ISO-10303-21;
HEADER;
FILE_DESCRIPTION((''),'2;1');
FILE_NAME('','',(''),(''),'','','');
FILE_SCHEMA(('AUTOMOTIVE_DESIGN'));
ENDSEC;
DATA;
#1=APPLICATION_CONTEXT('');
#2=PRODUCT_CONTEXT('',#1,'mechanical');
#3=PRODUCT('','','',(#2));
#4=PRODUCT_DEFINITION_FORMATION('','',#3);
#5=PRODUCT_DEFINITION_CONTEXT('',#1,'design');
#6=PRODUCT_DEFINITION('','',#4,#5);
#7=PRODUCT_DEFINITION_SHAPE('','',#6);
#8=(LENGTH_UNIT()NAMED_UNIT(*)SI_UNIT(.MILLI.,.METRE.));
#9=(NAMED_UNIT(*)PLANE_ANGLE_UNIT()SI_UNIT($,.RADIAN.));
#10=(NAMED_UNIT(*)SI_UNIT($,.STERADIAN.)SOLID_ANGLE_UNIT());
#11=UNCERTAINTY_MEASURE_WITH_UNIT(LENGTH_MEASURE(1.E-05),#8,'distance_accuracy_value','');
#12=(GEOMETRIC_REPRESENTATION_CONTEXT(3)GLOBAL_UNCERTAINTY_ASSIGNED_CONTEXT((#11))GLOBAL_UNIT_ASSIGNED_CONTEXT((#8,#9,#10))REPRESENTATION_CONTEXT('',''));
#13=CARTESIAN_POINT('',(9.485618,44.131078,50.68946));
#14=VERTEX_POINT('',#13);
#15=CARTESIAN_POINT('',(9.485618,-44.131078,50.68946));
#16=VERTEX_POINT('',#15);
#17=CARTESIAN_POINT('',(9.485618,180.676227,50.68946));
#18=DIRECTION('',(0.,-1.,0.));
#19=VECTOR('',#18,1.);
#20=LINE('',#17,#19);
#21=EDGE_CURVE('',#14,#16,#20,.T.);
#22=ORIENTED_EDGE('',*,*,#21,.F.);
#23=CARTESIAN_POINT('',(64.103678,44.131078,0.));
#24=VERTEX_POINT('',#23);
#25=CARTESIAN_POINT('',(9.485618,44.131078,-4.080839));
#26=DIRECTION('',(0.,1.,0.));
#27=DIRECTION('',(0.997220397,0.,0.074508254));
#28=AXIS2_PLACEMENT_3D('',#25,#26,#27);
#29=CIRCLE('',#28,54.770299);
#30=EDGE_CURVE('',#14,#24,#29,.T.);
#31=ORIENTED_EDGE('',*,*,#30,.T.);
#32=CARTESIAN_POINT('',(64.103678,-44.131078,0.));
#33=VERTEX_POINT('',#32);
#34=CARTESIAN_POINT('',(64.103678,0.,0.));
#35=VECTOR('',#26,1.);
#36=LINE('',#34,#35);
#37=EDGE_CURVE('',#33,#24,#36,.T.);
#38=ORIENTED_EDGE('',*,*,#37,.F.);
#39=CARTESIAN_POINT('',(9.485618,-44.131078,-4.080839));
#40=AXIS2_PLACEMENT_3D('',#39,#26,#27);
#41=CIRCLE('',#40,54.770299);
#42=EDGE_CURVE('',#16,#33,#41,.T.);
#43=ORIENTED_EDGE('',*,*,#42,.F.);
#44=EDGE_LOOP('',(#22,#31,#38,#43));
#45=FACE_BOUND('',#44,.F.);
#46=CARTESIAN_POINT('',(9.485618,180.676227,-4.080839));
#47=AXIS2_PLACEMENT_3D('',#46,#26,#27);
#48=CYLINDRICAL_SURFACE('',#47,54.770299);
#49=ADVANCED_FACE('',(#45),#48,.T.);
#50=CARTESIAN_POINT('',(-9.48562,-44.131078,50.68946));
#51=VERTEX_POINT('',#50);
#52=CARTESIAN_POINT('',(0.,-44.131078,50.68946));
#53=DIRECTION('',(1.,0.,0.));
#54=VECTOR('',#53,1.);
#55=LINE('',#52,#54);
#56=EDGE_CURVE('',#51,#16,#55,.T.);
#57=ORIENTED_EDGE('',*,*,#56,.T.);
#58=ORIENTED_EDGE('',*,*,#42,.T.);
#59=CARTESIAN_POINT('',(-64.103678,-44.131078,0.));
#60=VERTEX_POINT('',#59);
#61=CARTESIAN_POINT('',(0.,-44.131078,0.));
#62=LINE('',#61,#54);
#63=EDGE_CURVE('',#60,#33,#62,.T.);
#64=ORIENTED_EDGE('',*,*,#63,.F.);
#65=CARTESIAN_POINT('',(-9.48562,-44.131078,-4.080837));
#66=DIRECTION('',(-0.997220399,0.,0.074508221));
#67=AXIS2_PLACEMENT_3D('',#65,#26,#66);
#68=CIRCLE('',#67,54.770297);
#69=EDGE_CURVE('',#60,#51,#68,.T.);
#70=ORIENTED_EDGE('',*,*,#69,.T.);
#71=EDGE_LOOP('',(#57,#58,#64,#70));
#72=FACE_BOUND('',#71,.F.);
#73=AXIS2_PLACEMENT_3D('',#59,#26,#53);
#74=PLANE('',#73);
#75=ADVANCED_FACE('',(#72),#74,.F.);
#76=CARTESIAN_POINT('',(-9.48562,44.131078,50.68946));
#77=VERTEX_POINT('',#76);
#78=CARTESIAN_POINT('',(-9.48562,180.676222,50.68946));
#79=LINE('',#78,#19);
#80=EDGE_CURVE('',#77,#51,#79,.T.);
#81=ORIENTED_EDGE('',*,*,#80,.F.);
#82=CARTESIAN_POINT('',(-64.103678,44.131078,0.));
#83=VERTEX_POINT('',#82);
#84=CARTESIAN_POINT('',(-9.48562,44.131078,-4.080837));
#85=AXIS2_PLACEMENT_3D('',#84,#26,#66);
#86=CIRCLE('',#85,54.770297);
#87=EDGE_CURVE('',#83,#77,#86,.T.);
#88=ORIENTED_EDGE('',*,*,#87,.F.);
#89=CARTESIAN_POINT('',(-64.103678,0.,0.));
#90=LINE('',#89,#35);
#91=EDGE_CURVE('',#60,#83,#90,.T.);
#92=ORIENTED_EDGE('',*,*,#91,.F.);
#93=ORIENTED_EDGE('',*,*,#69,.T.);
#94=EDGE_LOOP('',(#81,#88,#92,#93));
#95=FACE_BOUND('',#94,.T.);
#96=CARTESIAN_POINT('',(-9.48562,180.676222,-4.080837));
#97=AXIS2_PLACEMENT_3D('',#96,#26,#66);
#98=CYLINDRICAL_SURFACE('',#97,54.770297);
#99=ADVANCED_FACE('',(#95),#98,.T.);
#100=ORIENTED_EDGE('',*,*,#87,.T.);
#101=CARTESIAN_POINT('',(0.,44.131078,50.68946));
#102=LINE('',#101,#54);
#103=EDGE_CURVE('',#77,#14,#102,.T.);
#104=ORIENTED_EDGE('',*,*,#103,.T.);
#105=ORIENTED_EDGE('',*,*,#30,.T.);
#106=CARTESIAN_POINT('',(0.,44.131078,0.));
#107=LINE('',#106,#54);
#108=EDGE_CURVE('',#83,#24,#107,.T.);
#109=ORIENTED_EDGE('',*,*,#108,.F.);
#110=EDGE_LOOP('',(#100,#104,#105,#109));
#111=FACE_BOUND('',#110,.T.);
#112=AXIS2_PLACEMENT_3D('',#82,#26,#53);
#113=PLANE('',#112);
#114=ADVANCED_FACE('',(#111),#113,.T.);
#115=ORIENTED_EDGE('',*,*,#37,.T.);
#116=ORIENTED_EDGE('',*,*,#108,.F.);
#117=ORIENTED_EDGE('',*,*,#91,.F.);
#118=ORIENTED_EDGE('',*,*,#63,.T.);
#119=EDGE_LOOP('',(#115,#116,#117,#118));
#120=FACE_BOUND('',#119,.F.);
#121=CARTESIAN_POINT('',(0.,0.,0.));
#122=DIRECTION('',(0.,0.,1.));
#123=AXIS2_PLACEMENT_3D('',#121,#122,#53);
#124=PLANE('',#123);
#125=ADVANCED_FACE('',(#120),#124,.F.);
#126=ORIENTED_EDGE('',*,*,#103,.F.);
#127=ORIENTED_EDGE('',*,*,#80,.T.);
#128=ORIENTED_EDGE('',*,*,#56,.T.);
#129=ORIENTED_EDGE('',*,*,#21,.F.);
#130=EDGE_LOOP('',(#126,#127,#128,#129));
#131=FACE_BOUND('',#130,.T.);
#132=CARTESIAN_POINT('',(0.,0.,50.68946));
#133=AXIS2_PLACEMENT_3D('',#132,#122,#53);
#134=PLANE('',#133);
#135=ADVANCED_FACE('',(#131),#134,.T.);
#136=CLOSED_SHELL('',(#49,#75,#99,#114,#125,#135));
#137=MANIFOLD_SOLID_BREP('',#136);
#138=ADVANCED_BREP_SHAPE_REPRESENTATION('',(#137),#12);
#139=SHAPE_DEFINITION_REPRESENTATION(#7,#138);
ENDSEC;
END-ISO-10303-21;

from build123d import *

# Parameters (mm, degrees)
F0_W        = 128.2073557377
F0_H        = 88.262155652
F1_DEPTH    = 50.68946
F2_T1_DEPTH = 361.3524449255
F3_T1_DEPTH = 361.352454187


# Not quite as in the source:
# - a fillet or chamfer that OpenCascade refuses, or shapes differently, is made with other operations: its cross-section is extruded or revolved along the edge and cut away or added


with BuildPart() as f1:
    # F0 (on Top) → F1 (new body)
    with BuildSketch(Plane.XY):
        Rectangle(F0_W, F0_H)
    extrude(amount=F1_DEPTH)

    # F2: fillet of radius 54.7702974041 on 1 edges, made by hand

    # F2_s2 → F2_t1 (cut)
    with BuildSketch(Plane.XZ.offset(-180.6762224627)):
        with BuildLine():
            ThreePointArc((-64.1036778688, 0), (-46.7433494099, 36.0644870809), (-9.4856200142, 50.68946))
            Line((-9.4856200142, 50.68946), (-64.1036778688, 50.68946))
            Line((-64.1036778688, 50.68946), (-64.1036778688, 0))
        make_face()
    extrude(amount=F2_T1_DEPTH, mode=Mode.SUBTRACT)

    # F3: fillet of radius 54.7702994 on 1 edges, made by hand

    # F3_s2 → F3_t1 (cut)
    with BuildSketch(Plane.XZ.offset(-180.6762270935)):
        with BuildLine():
            ThreePointArc((64.1036778688, 0), (46.7433482365, 36.064487178), (9.4856181618, 50.68946))
            Line((9.4856181618, 50.68946), (64.1036778688, 50.68946))
            Line((64.1036778688, 50.68946), (64.1036778688, 0))
        make_face()
    extrude(amount=F3_T1_DEPTH, mode=Mode.SUBTRACT)


solid = f1.part
